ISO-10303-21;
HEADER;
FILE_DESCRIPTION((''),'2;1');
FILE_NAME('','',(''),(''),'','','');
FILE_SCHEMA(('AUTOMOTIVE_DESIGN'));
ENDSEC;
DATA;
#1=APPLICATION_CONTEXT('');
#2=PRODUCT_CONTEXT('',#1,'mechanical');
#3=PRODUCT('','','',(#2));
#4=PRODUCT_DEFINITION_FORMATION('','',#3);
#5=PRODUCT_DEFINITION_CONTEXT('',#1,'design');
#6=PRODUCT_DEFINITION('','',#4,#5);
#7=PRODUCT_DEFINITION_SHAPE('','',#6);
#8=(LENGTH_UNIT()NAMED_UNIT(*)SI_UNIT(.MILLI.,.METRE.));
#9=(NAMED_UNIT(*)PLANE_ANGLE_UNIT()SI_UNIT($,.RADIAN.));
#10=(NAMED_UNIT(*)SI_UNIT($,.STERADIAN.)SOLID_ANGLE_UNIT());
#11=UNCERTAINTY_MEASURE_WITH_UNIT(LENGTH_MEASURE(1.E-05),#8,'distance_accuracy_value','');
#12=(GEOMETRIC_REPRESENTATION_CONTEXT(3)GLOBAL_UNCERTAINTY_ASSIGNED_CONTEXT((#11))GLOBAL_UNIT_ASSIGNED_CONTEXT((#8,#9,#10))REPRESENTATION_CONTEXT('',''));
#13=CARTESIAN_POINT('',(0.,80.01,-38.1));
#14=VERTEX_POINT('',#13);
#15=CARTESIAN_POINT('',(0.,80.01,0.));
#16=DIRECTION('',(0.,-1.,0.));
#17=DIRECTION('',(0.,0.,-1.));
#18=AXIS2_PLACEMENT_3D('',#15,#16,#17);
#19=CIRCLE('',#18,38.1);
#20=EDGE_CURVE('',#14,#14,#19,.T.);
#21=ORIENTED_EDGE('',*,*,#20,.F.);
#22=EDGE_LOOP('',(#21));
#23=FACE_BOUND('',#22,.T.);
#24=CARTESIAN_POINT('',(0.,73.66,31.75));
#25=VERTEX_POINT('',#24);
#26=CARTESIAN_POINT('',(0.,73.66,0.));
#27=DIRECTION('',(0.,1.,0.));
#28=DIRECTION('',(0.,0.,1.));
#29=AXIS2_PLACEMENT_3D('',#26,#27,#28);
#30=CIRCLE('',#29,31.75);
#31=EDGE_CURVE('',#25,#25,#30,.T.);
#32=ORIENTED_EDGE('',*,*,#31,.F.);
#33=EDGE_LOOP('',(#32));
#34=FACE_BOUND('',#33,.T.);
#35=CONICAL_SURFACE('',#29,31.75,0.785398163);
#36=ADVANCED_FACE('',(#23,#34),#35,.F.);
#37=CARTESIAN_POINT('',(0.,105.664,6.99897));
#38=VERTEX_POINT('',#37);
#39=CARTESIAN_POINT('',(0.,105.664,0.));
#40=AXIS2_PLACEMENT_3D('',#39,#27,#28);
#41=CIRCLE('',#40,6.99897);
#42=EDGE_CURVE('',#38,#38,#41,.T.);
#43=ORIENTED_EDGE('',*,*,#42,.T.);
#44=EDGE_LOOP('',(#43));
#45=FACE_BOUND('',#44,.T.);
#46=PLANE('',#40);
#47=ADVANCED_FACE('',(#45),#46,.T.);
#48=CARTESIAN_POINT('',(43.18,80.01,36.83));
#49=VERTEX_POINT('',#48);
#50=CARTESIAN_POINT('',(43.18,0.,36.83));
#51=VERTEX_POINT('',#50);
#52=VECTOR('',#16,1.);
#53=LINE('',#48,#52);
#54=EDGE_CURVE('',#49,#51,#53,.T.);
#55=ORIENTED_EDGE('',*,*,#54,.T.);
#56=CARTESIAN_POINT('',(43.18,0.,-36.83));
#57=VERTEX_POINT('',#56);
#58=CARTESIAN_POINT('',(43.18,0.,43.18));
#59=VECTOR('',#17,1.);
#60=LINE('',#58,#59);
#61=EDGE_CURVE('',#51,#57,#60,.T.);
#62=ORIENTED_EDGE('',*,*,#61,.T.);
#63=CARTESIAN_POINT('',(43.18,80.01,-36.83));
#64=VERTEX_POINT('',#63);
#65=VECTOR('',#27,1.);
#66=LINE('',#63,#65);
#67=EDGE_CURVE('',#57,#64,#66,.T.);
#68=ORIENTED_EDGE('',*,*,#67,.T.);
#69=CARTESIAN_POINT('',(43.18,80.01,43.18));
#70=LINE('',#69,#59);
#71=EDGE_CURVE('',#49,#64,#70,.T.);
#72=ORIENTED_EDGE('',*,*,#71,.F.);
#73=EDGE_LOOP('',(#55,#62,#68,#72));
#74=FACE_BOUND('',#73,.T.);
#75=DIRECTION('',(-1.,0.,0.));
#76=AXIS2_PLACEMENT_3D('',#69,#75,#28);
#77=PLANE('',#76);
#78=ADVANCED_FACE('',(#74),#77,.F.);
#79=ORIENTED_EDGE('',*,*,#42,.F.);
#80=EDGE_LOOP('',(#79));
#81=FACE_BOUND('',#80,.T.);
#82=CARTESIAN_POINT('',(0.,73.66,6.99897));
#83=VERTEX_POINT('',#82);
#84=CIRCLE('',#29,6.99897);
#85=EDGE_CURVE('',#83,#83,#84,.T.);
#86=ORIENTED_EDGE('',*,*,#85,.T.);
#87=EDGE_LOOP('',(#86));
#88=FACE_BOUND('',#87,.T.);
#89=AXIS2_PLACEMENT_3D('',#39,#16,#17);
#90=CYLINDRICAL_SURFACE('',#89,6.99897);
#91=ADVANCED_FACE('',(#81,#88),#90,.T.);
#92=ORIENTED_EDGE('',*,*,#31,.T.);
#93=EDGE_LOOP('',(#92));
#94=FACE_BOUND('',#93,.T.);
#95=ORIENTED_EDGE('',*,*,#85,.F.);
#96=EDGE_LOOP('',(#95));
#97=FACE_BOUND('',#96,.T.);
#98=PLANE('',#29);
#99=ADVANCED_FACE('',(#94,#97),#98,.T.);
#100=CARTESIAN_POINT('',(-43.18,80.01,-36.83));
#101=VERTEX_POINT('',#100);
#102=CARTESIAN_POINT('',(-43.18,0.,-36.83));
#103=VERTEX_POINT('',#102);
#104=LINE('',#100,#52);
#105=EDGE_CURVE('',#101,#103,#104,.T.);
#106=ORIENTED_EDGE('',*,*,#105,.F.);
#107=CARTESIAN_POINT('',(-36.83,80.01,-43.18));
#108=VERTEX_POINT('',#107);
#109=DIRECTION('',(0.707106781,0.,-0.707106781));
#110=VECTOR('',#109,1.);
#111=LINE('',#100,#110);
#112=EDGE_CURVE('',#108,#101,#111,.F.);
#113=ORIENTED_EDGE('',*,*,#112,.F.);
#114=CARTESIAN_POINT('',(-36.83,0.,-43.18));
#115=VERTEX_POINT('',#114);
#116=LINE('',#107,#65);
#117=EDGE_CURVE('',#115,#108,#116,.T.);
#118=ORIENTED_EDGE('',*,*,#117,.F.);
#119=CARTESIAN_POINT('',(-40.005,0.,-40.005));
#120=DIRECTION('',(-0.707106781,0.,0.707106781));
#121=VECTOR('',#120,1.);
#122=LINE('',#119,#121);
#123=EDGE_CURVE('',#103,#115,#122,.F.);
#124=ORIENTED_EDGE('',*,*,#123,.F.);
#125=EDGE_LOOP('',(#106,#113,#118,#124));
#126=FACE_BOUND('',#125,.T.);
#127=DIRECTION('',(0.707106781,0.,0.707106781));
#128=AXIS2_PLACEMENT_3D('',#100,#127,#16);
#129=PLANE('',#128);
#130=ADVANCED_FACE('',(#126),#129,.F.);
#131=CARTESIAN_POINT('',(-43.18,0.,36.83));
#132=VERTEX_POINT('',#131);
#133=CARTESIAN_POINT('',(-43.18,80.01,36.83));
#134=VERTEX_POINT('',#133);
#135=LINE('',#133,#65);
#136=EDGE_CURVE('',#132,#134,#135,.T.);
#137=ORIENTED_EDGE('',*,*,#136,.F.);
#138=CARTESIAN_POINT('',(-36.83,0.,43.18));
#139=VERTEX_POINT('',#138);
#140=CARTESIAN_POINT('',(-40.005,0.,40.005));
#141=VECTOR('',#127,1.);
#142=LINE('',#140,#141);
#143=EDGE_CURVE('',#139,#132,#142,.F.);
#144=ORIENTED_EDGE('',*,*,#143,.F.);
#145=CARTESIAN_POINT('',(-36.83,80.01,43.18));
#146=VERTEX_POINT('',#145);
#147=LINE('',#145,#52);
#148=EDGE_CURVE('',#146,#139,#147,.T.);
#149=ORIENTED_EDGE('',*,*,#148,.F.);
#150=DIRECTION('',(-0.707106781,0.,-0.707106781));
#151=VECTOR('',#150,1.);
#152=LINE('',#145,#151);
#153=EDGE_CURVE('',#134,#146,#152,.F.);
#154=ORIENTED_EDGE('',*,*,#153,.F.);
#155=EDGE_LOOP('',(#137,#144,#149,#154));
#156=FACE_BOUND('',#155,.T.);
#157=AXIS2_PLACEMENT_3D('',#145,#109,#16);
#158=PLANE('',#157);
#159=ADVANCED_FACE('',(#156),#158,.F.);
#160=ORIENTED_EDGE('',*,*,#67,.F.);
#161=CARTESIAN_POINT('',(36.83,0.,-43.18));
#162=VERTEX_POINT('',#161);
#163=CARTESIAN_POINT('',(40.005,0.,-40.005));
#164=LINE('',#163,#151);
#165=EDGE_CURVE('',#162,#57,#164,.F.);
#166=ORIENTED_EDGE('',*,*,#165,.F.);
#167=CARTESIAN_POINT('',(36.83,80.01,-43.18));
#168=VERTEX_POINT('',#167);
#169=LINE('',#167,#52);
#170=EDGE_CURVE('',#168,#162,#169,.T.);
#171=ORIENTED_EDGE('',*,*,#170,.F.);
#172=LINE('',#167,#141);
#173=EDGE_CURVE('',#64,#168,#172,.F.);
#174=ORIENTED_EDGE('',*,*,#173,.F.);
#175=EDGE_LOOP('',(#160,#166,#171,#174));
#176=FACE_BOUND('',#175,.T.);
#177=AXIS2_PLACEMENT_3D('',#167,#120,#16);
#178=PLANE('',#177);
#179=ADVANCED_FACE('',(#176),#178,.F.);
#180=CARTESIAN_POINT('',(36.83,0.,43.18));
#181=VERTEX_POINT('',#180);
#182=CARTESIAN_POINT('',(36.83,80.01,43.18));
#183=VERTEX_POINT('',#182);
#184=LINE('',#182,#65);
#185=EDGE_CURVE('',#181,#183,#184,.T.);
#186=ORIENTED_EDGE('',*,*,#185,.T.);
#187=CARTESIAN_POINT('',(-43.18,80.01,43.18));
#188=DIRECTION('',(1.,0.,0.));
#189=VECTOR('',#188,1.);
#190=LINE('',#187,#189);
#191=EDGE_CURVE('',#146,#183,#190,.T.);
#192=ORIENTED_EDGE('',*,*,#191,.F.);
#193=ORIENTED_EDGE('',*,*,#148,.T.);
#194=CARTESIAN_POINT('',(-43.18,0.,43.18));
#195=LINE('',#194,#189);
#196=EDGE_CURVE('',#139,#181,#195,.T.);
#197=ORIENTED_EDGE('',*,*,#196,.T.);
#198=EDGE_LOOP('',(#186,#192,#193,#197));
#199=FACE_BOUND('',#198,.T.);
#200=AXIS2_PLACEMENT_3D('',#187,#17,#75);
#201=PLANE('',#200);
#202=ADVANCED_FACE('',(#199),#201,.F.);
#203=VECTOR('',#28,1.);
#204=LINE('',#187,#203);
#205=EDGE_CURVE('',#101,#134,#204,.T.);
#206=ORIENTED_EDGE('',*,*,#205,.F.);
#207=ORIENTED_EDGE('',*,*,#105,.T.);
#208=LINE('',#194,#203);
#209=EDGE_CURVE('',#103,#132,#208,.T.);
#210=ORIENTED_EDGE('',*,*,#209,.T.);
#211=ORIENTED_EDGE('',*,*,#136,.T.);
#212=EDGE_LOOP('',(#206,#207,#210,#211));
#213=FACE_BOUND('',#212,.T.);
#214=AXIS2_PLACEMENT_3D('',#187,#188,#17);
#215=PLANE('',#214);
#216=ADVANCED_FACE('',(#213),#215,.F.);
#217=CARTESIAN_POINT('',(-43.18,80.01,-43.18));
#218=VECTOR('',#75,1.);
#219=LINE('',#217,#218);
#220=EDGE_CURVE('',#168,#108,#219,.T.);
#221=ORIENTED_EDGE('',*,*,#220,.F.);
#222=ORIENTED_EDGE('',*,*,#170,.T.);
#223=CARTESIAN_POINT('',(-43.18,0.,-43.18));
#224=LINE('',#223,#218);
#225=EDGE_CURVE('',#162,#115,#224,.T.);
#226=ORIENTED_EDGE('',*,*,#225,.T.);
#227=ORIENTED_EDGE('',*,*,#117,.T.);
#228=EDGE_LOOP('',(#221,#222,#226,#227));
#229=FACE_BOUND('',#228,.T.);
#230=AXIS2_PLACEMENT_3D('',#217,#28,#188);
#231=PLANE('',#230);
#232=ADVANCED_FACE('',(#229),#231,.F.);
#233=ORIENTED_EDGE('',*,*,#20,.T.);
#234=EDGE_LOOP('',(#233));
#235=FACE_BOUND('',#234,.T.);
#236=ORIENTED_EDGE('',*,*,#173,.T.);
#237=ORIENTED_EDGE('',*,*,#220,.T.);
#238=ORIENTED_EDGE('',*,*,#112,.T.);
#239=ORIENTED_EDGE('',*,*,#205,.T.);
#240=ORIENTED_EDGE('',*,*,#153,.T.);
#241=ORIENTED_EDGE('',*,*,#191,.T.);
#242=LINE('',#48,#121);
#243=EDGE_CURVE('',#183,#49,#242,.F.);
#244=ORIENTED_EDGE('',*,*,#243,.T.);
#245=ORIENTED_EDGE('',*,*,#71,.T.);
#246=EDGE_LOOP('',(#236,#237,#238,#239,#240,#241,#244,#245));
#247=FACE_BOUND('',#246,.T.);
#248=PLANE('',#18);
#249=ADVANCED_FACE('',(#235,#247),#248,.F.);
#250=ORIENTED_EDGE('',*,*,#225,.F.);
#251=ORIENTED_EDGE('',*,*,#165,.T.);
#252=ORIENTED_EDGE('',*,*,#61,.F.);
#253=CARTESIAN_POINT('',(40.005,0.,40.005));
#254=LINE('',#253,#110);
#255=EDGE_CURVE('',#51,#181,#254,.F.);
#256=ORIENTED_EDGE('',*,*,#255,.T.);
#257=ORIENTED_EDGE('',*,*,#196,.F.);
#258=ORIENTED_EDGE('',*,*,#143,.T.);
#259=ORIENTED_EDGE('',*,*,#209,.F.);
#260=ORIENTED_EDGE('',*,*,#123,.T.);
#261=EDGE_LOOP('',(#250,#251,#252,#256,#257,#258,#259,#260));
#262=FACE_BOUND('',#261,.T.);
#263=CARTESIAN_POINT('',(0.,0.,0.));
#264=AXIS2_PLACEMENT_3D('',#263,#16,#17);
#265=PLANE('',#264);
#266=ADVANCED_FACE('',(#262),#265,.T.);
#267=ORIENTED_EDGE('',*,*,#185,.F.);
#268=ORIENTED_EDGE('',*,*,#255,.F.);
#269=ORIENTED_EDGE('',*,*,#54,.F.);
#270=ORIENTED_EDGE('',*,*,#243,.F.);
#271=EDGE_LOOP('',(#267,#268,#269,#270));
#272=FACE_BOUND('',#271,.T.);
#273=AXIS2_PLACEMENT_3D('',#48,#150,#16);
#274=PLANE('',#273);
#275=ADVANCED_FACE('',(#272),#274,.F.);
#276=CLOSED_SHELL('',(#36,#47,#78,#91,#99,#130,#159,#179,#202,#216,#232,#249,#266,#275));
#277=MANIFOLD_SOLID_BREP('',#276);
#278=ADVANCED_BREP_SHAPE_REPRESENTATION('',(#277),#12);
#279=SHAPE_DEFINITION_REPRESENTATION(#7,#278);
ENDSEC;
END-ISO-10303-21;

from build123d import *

# Parameters (mm, degrees)
SKETCH1_W           = 86.36
SKETCH1_H           = 86.36
BOSS_EXTRUDE1_DEPTH = 80.01
SKETCH2_R           = 31.75
CUT_EXTRUDE1_DEPTH  = 6.35
CHAMFER1_SIZE       = 6.35
SKETCH3_R           = 6.99897
BOSS_EXTRUDE2_DEPTH = 32.004
CHAMFER2_SIZE       = 6.35


with BuildPart() as part:
    # Sketch1 → Boss-Extrude1 (new body)
    with BuildSketch(Plane(origin=(0, 0, 0), x_dir=(1, 0, 0), z_dir=(0, 1, 0))):
        Rectangle(SKETCH1_W, SKETCH1_H)
    extrude(amount=BOSS_EXTRUDE1_DEPTH)

    # Sketch2 → Cut-Extrude1 (cut)
    with BuildSketch(Plane(origin=(0, 80.01, 0), x_dir=(1, 0, 0), z_dir=(0, 1, 0))):
        with Locations(Location((0, 0, 0), (0, 0, 270))):
            Circle(SKETCH2_R)
    extrude(amount=-CUT_EXTRUDE1_DEPTH, mode=Mode.SUBTRACT)

    # Chamfer1
    chamfer1_edges = [part.edges().sort_by_distance(p)[0] for p in [
        (43.18, 40.005, 43.18),
        (-43.18, 40.005, 43.18),
        (-43.18, 40.005, -43.18),
        (43.18, 40.005, -43.18),
    ]]
    chamfer(chamfer1_edges, length=CHAMFER1_SIZE)

    # Sketch3 → Boss-Extrude2 (add)
    with BuildSketch(Plane(origin=(0, 73.66, 0), x_dir=(1, 0, 0), z_dir=(0, 1, 0))):
        with Locations(Location((0, 0, 0), (0, 0, 270))):
            Circle(SKETCH3_R)
    extrude(amount=BOSS_EXTRUDE2_DEPTH)

    # Chamfer2
    chamfer2_edges = [part.edges().sort_by_distance(p)[0] for p in [
        (0, 80.01, -31.75),
    ]]
    chamfer(chamfer2_edges, length=CHAMFER2_SIZE - 0.0001)  # a hair under: the kernel refuses the full size


solid = part.part
